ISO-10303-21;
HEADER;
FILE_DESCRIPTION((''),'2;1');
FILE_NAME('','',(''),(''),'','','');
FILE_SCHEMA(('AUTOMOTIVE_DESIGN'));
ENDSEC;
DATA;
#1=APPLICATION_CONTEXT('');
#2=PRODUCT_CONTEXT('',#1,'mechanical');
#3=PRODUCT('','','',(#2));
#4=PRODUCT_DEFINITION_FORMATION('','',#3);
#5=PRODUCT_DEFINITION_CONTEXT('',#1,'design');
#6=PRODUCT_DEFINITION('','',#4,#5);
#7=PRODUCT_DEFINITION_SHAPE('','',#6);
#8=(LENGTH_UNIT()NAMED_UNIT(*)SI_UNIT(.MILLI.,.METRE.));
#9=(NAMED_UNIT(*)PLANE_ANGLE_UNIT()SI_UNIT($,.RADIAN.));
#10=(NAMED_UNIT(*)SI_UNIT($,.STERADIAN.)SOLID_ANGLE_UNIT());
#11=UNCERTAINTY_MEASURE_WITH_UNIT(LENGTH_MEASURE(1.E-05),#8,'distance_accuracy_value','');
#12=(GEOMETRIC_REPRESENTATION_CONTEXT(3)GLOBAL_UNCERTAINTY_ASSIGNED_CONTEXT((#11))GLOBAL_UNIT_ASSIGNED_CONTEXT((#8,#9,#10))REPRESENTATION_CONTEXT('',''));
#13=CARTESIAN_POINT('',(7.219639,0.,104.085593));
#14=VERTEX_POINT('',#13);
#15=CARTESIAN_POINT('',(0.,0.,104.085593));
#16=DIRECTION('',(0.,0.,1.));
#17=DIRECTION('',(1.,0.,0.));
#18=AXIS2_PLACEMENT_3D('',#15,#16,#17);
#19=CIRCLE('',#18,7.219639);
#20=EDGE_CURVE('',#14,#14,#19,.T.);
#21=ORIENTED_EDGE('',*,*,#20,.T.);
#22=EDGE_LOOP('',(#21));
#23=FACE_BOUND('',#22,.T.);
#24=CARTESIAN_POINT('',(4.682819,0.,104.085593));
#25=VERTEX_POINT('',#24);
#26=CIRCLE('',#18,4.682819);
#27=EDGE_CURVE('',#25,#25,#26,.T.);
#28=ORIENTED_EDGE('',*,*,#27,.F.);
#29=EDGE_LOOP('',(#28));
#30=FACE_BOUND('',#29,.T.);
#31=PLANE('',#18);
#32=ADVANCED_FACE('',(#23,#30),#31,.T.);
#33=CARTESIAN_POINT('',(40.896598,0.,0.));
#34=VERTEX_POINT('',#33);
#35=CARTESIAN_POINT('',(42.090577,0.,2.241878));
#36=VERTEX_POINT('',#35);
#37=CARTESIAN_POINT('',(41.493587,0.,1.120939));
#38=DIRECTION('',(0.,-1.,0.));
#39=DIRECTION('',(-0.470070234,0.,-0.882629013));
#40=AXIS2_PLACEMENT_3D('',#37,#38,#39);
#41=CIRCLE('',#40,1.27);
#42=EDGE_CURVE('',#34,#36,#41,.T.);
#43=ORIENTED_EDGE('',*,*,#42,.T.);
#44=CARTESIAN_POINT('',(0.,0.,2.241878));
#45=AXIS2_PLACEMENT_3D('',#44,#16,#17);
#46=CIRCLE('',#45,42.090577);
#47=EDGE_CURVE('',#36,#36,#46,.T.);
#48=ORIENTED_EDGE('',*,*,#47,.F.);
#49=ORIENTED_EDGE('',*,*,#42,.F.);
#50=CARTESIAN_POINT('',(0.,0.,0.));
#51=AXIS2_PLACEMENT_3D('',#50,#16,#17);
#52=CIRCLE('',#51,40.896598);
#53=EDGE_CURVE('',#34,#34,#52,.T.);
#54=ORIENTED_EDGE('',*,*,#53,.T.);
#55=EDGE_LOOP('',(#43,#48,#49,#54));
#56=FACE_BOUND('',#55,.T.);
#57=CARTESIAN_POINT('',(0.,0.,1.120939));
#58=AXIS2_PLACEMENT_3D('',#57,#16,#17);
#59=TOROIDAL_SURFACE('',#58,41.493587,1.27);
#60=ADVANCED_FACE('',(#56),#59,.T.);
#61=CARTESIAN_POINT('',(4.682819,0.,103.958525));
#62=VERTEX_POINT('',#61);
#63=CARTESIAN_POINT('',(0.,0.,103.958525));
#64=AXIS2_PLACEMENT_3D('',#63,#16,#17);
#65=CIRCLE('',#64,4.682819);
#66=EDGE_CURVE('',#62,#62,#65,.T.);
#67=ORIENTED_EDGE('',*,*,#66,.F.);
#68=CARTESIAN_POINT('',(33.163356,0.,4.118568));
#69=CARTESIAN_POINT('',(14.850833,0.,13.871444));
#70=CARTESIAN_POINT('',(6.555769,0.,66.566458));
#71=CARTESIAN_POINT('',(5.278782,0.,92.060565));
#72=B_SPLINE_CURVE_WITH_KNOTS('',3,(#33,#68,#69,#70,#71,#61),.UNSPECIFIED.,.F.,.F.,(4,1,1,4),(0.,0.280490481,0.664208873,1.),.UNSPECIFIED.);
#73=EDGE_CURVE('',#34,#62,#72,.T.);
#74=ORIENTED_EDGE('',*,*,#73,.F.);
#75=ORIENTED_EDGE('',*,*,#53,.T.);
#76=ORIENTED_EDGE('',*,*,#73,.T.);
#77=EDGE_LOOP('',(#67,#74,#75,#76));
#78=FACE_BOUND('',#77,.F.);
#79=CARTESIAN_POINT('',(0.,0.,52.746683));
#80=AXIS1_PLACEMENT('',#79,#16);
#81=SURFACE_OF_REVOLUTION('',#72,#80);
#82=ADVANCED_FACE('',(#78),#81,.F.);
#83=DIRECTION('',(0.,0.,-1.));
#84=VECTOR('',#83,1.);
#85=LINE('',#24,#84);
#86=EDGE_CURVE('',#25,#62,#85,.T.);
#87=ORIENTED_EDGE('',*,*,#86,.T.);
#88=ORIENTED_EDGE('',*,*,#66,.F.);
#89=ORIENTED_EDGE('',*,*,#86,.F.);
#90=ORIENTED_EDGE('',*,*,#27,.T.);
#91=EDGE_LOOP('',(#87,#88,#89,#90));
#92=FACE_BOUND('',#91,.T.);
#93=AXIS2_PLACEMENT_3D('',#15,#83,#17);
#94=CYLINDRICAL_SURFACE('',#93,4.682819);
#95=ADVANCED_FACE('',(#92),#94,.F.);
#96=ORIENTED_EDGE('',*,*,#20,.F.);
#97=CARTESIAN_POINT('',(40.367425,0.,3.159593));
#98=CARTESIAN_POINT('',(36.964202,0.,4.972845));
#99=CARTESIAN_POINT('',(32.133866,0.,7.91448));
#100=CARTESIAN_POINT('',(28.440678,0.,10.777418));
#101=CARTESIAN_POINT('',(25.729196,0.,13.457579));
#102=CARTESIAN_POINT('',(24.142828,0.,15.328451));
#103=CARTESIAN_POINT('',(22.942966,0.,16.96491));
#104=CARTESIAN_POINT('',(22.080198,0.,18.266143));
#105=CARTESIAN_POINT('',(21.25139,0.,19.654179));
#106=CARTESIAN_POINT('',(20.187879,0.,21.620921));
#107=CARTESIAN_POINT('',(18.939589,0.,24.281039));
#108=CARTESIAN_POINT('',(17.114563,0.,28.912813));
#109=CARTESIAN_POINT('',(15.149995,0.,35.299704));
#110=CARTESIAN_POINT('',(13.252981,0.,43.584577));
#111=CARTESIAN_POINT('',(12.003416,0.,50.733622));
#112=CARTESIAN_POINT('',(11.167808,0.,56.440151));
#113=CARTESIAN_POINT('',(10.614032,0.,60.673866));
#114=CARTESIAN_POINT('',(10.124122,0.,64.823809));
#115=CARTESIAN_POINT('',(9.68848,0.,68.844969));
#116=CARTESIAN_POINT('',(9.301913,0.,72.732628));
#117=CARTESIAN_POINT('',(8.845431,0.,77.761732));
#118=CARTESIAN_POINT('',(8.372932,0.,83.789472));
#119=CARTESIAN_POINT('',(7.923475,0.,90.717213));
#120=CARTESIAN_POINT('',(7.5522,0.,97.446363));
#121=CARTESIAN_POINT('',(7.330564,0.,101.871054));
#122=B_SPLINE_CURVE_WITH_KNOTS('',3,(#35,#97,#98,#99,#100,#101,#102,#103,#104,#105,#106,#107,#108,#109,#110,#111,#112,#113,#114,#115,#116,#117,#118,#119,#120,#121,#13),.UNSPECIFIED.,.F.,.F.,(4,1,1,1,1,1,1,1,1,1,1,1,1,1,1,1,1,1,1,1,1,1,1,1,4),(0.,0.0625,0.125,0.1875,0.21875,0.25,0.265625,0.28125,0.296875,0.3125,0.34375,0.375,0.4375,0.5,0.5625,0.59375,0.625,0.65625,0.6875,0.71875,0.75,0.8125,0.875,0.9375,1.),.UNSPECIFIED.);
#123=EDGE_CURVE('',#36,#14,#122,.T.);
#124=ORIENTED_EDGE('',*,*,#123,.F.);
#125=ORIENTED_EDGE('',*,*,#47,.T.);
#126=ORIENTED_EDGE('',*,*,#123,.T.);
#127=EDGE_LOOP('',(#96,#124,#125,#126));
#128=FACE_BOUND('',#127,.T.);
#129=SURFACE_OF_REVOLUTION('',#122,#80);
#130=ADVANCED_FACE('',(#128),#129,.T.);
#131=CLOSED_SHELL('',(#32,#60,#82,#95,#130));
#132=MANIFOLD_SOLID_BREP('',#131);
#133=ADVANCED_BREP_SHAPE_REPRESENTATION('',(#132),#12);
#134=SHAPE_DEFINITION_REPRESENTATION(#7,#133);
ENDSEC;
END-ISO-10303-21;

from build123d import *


# Not quite as in the source:
# - the dataset's text gives a spline's control points without its knots; the knots are read off the source's solid


with BuildPart() as f1:
    # F0 (on Front) → F1 (revolve)
    with BuildSketch(Plane.XZ):
        with BuildLine():
            add(Edge.make_bspline(
                [(40.8965982497, 0), (33.1633556054, 4.1185675105), (14.8508325851, 13.8714442552), (6.5557692481, 66.5664577266), (5.2787821832, 92.0605652909), (4.682819359, 103.9585247636)],
                knots=[0, 0, 0, 0, 0.2804904807, 0.6642088734, 1, 1, 1, 1], degree=3))
            ThreePointArc((40.8965982497, 0), (42.6145261991, 0.5239496211), (42.090576578, 2.2418775706))
            add(Edge.make_bspline(
                [(42.090576578, 2.2418775706), (40.3674248186, 3.159593098), (36.9642017907, 4.9728446594), (32.1338664363, 7.9144799924), (28.44067819, 10.7774176375), (25.7291958678, 13.4575786399), (24.1428280505, 15.3284506058), (22.9429657646, 16.9649101865), (22.0801981067, 18.266143088), (21.2513895254, 19.6541794499), (20.187878668, 21.6209207611), (18.9395888059, 24.2810392017), (17.1145626752, 28.9128131349), (15.1499951443, 35.2997042967), (13.2529808532, 43.5845770609), (12.0034160078, 50.7336217676), (11.1678084816, 56.4401514937), (10.6140321501, 60.6738663199), (10.1241221968, 64.8238089953), (9.6884800665, 68.8449688441), (9.3019131289, 72.7326282006), (8.8454305294, 77.7617318227), (8.3729320865, 83.789471924), (7.9234747699, 90.7172131214), (7.5522000665, 97.4463631801), (7.3305639626, 101.8710540131), (7.2196388262, 104.0855927787)],
                knots=[0, 0, 0, 0, 0.0625, 0.125, 0.1875, 0.21875, 0.25, 0.265625, 0.28125, 0.296875, 0.3125, 0.34375, 0.375, 0.4375, 0.5, 0.5625, 0.59375, 0.625, 0.65625, 0.6875, 0.71875, 0.75, 0.8125, 0.875, 0.9375, 1, 1, 1, 1], degree=3))
            Line((7.2196388262, 104.0855927787), (4.682819359, 104.0855927787))
            Line((4.682819359, 104.0855927787), (4.682819359, 103.9585247636))
        make_face()
    revolve(axis=Axis((0, 0, 52.7466833591), (0, 0, 1)))


solid = f1.part
